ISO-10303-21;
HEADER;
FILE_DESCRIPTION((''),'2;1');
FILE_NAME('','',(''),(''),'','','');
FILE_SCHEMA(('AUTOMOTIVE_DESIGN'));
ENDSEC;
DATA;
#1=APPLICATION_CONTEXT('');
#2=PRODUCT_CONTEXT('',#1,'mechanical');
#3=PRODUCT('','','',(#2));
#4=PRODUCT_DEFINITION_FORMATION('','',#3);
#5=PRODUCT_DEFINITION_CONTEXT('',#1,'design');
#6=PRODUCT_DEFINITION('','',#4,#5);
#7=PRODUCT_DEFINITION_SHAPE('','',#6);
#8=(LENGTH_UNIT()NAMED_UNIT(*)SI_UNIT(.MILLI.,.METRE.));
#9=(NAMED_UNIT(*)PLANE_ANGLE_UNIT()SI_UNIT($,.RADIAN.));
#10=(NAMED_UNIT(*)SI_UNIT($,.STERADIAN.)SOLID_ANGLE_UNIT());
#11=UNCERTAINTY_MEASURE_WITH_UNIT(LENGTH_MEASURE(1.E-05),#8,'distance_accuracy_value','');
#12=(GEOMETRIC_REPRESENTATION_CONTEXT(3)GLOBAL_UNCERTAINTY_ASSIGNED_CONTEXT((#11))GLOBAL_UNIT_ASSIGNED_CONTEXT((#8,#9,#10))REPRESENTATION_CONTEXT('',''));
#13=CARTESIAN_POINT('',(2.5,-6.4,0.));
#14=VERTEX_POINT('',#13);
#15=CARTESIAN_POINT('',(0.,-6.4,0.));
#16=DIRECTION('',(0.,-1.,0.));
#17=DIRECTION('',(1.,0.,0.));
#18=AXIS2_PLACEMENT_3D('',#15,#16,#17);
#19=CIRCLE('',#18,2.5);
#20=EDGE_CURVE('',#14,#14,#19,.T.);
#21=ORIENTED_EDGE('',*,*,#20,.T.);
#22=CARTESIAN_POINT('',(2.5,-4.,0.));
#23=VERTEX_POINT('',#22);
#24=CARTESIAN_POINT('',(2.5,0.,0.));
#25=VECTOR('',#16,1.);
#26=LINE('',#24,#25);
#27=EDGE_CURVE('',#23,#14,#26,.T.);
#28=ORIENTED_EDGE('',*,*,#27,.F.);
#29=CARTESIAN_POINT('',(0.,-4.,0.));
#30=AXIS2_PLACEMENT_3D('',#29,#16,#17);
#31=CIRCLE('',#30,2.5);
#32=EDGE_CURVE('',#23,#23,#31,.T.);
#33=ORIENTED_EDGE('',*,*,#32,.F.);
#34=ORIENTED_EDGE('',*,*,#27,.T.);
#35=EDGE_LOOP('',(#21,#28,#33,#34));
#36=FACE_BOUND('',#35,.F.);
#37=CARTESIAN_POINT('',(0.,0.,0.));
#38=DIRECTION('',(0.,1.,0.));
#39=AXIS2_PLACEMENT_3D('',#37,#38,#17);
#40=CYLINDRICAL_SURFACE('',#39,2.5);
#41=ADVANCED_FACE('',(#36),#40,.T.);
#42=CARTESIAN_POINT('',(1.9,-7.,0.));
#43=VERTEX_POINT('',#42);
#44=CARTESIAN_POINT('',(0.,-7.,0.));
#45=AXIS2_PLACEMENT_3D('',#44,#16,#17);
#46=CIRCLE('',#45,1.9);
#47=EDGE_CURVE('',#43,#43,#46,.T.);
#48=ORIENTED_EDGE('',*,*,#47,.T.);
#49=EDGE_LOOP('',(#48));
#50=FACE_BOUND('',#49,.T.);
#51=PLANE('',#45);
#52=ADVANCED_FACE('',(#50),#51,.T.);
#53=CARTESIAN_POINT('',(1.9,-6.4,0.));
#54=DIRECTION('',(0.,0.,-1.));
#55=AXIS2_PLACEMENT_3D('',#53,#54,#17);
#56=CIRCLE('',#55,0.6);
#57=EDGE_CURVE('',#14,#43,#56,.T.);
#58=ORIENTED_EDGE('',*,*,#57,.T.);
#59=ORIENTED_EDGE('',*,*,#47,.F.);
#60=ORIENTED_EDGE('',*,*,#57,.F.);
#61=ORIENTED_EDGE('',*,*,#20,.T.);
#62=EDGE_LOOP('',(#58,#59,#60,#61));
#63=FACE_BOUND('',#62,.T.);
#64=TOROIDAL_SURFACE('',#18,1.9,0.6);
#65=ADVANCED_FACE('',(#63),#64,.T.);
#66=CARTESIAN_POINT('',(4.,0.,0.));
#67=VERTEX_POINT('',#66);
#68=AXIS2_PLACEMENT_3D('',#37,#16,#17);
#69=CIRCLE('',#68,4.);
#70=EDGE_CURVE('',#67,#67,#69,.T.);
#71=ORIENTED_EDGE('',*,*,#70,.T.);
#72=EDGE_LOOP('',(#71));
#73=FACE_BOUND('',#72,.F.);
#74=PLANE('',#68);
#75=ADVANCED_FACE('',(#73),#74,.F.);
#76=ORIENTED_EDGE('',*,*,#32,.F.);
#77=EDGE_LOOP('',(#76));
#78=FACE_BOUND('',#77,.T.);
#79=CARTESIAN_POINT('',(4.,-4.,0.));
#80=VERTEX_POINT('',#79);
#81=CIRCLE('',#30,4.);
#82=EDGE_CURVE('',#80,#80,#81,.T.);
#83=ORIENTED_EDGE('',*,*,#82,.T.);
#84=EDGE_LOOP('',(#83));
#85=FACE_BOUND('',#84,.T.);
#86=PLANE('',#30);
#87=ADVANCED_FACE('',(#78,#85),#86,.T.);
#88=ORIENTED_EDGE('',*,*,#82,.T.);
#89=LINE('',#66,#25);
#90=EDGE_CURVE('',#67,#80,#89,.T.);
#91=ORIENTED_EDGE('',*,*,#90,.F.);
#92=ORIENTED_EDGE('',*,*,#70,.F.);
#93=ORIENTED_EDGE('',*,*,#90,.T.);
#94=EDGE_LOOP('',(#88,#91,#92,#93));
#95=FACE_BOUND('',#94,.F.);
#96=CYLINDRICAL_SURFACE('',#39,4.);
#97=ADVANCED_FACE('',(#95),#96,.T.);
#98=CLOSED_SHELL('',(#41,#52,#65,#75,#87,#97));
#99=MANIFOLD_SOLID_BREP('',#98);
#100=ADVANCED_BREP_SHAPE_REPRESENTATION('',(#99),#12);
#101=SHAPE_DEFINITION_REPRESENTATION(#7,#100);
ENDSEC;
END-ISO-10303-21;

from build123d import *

# Parameters (mm, degrees)
F0_R     = 1.65
F1_DEPTH = 7
F0_R_2   = 2.5
F2_DEPTH = 7
F0_R_3   = 4
F3_DEPTH = 4
F4_R     = 0.6


with BuildPart() as f1:
    # F0 (on Front) → F1 (new body)
    with BuildSketch(Plane.XZ):
        Circle(F0_R)
    extrude(amount=F1_DEPTH)

    # F0 (on Front) → F2 (join)
    with BuildSketch(Plane.XZ):
        Circle(F0_R_2)
        Circle(F0_R, mode=Mode.SUBTRACT)
    extrude(amount=F2_DEPTH)

    # F0 (on Front) → F3 (join)
    with BuildSketch(Plane.XZ):
        Circle(F0_R_3)
        Circle(F0_R_2, mode=Mode.SUBTRACT)
    extrude(amount=F3_DEPTH)

    # F4
    f4_edges = [f1.edges().sort_by_distance(p)[0] for p in [
        (-2.5, -7, 0),
    ]]
    fillet(f4_edges, radius=F4_R)


solid = f1.part
